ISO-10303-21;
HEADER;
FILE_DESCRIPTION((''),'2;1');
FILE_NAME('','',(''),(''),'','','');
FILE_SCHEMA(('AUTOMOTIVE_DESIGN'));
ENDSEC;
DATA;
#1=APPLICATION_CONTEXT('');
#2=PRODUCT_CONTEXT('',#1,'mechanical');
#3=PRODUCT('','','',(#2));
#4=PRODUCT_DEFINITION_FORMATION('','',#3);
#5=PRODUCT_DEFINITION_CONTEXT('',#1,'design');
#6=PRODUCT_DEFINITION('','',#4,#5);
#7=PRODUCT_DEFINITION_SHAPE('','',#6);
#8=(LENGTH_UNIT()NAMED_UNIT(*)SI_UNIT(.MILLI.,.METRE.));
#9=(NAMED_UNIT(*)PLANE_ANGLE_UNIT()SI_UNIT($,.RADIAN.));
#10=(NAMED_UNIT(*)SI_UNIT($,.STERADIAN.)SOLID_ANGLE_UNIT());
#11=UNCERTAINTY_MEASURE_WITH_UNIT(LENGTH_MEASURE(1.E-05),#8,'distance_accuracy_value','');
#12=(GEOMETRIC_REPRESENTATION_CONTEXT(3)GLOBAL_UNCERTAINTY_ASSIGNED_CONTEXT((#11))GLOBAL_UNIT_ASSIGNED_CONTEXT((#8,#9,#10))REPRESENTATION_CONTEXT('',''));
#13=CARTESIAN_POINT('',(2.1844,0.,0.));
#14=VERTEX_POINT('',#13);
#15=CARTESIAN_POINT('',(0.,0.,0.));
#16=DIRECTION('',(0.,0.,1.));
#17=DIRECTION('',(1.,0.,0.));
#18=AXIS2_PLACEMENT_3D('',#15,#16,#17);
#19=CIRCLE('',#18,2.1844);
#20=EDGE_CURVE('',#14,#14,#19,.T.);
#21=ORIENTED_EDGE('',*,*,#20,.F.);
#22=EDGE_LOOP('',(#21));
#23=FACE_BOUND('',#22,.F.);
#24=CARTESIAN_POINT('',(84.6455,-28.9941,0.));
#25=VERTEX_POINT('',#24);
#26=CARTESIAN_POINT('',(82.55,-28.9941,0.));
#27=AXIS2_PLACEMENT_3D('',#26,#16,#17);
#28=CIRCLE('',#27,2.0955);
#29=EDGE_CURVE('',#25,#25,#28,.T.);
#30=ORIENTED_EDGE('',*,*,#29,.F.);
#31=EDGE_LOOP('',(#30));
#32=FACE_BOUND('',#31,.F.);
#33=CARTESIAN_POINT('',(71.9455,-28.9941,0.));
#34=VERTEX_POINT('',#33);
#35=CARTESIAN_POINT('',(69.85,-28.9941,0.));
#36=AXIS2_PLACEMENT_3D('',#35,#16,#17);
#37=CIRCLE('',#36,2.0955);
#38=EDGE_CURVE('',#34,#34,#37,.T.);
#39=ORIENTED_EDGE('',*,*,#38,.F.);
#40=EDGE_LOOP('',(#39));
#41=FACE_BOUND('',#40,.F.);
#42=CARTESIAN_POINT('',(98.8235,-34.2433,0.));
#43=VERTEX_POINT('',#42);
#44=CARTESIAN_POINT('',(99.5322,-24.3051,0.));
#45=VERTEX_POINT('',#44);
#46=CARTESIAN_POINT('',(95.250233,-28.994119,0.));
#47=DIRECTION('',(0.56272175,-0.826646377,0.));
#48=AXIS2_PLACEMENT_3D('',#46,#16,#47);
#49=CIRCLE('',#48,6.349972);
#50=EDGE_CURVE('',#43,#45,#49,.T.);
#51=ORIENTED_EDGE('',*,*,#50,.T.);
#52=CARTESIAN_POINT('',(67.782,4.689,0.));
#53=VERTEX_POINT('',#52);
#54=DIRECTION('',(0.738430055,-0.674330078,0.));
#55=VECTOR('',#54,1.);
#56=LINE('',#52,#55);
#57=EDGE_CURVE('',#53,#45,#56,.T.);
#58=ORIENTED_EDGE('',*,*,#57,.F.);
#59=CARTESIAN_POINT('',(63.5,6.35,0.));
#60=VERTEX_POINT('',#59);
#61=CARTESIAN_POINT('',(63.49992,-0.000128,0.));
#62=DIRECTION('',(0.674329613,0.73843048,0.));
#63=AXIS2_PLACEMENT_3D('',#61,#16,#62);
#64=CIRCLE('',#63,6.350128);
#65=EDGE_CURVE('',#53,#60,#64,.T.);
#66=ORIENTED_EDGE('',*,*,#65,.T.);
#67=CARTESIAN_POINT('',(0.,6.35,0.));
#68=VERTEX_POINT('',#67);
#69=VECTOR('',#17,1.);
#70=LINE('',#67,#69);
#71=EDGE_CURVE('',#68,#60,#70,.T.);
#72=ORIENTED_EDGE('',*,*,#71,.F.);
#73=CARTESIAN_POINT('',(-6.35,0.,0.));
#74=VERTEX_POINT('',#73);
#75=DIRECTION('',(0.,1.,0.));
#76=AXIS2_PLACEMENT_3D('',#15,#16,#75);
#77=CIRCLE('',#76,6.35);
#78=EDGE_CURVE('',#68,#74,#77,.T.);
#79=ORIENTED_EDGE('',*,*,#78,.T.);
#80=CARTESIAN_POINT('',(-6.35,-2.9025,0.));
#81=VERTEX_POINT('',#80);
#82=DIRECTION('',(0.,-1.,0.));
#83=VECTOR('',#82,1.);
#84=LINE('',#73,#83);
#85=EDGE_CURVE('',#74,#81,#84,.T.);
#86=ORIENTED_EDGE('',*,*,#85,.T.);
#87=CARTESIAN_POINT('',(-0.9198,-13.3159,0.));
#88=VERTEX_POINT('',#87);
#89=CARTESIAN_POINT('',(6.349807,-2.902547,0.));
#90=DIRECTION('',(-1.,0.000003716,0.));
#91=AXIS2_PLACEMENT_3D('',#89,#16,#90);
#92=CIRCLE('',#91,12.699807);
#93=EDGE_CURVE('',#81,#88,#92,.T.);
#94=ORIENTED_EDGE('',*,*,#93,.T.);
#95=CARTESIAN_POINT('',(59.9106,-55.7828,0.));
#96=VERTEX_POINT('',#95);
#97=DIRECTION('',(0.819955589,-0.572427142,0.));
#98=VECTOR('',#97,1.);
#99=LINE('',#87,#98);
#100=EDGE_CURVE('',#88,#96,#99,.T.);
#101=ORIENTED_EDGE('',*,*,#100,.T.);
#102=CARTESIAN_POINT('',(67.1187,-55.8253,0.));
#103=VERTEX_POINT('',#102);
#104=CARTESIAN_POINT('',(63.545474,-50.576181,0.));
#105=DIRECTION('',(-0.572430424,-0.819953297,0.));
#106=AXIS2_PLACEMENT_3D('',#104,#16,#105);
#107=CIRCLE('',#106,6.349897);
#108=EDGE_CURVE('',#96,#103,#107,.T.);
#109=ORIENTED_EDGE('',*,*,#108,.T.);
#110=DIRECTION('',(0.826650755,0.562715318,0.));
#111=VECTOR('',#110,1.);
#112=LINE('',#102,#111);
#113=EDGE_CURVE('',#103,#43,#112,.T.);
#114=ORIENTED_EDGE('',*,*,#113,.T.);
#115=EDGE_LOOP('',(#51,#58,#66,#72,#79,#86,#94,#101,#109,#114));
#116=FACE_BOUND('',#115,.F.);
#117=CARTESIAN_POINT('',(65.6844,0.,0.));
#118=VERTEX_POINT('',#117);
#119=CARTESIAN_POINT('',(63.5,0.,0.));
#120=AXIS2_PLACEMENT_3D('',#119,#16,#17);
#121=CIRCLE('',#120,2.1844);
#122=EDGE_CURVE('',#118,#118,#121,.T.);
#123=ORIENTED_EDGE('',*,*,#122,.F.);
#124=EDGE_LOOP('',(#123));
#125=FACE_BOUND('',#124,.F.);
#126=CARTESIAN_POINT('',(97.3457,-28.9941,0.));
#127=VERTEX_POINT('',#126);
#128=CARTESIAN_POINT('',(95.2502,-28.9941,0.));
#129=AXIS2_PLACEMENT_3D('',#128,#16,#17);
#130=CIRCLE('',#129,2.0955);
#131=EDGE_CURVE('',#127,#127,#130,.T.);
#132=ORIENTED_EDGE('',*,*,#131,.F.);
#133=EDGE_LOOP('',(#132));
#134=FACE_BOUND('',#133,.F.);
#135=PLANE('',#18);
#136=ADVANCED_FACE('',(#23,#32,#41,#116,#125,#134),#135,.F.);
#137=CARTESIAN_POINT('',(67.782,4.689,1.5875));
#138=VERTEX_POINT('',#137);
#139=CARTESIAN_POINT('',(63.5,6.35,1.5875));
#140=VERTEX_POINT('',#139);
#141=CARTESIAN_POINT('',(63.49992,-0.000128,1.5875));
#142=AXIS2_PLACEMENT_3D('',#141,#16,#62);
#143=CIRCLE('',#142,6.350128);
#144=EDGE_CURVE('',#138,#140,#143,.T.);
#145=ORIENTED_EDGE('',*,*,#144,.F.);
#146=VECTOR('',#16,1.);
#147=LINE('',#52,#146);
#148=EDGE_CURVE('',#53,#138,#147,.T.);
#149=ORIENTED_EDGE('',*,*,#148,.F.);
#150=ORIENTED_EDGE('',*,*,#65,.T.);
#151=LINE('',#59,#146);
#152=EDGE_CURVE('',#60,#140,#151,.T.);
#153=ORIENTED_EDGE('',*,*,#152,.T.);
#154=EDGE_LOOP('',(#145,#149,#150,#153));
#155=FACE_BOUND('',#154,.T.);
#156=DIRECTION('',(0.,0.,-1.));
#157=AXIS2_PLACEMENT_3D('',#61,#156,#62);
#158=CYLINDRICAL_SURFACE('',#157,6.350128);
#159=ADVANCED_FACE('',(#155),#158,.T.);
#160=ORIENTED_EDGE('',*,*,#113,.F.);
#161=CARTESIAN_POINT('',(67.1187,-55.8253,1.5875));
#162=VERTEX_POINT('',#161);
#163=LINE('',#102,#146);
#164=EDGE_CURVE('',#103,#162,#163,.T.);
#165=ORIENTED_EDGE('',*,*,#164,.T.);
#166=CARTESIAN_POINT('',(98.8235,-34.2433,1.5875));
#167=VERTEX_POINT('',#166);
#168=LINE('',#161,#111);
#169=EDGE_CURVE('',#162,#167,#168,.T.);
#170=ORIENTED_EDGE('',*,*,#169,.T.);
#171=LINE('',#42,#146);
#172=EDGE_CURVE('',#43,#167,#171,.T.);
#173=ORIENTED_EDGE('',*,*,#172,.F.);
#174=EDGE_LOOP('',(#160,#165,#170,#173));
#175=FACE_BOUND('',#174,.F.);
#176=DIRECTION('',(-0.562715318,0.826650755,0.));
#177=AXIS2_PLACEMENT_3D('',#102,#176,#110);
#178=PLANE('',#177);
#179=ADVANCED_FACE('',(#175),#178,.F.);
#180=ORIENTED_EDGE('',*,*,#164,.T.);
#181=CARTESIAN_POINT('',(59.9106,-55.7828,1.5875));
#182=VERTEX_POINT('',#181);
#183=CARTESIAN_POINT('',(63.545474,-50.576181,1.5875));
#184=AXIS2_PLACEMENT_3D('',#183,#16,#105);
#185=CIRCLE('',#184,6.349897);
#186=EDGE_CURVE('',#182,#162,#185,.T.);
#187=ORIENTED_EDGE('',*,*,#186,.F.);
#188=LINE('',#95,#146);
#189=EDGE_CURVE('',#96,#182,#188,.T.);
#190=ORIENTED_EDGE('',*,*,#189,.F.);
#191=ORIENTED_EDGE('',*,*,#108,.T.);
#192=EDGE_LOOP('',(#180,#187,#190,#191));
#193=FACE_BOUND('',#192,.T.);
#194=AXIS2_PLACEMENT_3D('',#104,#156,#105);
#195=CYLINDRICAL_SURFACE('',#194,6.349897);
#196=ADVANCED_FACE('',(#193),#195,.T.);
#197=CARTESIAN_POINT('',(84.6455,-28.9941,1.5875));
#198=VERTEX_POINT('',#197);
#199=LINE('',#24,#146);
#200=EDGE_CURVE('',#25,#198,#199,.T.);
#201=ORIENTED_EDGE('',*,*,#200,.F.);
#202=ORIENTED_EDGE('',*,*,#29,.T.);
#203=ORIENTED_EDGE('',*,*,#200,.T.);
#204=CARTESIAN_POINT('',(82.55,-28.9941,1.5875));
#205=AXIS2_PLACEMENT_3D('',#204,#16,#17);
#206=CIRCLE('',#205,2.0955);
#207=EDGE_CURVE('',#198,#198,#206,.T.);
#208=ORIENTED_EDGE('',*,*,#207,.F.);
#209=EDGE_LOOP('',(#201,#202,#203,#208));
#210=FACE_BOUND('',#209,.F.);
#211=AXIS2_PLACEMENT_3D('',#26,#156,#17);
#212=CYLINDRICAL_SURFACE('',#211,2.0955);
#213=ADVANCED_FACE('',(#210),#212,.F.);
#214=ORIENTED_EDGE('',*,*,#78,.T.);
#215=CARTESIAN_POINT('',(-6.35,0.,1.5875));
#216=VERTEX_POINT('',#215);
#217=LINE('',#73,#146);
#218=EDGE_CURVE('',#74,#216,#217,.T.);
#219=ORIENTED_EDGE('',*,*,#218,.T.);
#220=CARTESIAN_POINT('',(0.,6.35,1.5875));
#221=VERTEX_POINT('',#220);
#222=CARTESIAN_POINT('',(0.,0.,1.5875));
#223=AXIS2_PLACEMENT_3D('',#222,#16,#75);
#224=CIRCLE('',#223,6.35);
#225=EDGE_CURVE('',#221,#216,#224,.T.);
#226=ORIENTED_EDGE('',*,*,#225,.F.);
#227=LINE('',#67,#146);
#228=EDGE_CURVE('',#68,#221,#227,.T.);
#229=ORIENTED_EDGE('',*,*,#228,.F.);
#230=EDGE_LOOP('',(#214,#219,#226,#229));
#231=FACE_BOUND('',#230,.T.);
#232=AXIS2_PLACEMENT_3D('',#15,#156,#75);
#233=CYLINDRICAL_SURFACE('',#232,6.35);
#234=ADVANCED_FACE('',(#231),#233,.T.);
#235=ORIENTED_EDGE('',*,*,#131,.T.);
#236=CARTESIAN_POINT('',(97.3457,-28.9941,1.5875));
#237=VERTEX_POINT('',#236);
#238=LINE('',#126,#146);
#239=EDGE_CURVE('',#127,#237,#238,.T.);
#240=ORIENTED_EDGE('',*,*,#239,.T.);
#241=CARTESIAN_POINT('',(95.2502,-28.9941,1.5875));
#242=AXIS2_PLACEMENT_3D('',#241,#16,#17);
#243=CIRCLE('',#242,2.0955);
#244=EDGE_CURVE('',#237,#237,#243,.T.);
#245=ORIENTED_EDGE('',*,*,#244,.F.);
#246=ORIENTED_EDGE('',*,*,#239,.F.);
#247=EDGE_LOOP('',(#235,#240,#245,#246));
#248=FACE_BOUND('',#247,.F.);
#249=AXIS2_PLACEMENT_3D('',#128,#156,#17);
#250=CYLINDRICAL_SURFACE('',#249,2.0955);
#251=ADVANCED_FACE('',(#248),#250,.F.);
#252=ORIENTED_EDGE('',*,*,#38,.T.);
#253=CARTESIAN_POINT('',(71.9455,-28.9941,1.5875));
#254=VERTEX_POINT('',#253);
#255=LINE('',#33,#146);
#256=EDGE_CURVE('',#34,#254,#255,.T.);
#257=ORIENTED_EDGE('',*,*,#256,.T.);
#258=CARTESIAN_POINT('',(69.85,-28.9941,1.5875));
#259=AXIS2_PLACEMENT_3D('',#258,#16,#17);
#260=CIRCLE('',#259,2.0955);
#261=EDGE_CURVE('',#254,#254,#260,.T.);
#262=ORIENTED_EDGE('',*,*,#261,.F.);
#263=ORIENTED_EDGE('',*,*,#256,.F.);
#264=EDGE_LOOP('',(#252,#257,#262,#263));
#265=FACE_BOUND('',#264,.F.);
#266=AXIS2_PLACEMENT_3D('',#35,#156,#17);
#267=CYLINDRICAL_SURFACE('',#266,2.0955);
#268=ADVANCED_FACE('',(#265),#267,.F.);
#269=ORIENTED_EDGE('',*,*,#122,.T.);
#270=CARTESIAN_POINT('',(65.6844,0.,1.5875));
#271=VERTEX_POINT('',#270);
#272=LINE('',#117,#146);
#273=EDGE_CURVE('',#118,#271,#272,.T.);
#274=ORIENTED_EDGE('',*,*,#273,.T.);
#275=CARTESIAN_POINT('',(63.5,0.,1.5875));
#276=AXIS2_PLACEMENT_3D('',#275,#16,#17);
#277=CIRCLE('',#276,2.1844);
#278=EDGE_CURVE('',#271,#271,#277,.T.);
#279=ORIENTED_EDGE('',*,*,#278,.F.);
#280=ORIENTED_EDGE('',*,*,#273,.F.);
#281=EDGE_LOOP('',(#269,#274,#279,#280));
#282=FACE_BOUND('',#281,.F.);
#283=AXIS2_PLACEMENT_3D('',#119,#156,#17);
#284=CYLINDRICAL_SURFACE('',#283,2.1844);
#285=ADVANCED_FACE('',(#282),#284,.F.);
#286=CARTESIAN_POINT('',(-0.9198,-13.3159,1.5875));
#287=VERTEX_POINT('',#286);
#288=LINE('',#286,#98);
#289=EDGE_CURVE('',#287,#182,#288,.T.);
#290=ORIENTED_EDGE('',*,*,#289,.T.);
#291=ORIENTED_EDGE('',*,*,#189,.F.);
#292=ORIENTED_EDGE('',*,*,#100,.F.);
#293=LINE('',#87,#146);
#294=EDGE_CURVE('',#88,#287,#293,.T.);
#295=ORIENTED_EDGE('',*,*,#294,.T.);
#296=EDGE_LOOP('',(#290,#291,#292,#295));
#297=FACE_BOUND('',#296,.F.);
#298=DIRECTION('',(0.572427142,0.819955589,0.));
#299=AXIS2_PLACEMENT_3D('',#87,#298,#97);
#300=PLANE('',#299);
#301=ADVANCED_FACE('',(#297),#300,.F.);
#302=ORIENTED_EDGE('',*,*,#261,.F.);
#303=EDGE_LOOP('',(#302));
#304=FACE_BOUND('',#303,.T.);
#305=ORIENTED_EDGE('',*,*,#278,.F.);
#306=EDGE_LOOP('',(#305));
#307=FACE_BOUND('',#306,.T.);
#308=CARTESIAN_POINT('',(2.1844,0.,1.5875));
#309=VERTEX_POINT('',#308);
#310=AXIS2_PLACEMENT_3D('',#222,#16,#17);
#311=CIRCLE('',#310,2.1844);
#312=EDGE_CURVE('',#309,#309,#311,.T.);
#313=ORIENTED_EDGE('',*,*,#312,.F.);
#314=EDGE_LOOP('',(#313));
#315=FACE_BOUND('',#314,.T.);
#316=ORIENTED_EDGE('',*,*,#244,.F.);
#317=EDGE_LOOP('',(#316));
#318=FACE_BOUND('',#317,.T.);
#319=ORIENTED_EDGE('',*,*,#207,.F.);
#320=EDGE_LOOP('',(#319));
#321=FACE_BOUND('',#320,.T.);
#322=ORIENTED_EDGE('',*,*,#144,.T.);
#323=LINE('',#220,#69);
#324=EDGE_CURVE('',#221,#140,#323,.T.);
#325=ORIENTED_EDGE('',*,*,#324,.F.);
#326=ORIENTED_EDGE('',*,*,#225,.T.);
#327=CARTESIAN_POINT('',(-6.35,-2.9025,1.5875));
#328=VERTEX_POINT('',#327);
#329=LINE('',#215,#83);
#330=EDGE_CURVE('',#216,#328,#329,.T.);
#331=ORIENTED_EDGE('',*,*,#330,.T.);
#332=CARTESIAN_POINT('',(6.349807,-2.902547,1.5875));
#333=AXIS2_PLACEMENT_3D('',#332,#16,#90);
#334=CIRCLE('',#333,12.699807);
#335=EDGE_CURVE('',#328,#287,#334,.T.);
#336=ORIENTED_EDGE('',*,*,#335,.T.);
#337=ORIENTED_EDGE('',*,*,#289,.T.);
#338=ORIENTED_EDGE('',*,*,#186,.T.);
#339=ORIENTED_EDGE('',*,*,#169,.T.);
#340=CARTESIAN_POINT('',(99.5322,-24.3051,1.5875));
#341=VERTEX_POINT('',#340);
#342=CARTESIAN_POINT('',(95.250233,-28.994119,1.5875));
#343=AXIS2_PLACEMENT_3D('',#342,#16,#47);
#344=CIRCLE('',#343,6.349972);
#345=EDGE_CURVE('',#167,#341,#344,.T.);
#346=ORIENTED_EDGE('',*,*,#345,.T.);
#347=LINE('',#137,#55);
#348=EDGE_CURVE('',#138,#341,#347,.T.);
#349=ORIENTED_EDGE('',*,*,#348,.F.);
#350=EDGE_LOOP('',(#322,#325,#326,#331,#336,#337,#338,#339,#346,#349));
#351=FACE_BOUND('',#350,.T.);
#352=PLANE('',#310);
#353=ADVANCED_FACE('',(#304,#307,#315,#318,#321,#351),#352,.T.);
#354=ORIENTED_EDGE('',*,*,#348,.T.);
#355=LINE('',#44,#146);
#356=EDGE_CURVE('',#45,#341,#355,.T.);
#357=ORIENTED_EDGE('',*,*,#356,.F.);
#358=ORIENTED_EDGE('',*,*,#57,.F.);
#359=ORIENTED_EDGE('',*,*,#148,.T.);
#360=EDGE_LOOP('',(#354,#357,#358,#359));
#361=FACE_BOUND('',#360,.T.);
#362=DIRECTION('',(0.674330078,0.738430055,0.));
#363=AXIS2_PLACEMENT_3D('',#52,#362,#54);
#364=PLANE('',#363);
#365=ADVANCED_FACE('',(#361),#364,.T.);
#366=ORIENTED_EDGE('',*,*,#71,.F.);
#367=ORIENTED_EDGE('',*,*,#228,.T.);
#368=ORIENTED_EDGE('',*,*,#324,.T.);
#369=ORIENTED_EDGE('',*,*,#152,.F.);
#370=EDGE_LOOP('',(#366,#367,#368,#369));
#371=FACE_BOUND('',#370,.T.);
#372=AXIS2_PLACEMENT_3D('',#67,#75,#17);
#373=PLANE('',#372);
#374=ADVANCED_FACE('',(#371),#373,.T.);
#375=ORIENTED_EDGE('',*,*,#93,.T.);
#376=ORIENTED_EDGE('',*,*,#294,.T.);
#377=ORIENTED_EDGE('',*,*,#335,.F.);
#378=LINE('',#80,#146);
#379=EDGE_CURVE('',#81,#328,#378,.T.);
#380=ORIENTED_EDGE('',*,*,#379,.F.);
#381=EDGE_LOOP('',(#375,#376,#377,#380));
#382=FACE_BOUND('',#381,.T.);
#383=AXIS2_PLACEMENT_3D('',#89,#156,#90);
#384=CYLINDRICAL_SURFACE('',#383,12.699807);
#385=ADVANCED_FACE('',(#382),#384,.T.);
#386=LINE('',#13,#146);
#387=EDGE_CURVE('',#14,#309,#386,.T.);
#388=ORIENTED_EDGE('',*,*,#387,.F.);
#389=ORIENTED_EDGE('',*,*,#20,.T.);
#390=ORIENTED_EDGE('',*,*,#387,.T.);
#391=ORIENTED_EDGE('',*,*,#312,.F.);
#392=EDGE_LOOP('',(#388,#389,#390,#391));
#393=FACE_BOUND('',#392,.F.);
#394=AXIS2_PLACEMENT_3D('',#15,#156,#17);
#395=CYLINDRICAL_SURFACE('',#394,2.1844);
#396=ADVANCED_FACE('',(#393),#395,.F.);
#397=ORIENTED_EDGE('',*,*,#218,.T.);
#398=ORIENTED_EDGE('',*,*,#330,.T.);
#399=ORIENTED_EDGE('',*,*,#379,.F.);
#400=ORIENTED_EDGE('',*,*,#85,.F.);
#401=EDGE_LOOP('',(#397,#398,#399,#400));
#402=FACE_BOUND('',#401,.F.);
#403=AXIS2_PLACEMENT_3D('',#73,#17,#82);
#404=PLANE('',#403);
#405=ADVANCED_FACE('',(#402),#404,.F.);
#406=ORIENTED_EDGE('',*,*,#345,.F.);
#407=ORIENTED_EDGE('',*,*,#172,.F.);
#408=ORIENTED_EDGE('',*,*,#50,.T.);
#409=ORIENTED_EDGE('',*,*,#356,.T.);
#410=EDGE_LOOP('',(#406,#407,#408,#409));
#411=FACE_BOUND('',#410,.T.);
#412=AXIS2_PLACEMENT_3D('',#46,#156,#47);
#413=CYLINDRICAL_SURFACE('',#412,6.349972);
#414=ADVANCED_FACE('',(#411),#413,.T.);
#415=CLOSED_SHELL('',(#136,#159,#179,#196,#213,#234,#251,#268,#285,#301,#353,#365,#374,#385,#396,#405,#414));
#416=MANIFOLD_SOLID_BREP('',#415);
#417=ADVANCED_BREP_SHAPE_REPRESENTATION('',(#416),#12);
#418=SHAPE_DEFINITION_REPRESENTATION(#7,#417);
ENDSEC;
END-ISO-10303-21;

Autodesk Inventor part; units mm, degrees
ref_plane "YZ Plane" through (0, 0, 0) normal (1, 0, 0) x (0, 1, 0)
ref_plane "XZ Plane" through (0, 0, 0) normal (0, 1, 0) x (-1, 0, 0)
ref_plane "XY Plane" through (0, 0, 0) normal (0, 0, 1) x (1, 0, 0)
sketch "main" plane through (0, 0, 0) normal (0, 0, 1) x (1, 0, 0)
  circle A0 centre (-16.6212, -19.5437) radius 2.1844
  arc A1 (-20.9032, -24.2328) -> (-16.6212, -25.8937) centre (-16.6212, -19.5437) ccw
  circle A2 centre (-22.9712, 9.4504) radius 2.0955
  arc A3 (-13.0318, 36.2391) -> (-20.24, 36.2816) centre (-16.6667, 31.0324) ccw
  line L0 (-20.9032, -24.2328) -> (-52.6534, 4.7613)
  circle A4 centre (-35.6713, 9.4504) radius 2.0955
  circle A5 centre (-48.3714, 9.4504) radius 2.0955
  arc A6 (-51.9447, 14.6996) -> (-52.6534, 4.7613) centre (-48.3714, 9.4504) ccw
  line L1 (-20.24, 36.2816) -> (-51.9447, 14.6996)
  circle A7 centre (46.8788, -19.5437) radius 2.1844
  arc A8 (46.8788, -25.8937) -> (53.2288, -19.5437) centre (46.8788, -19.5437) ccw
  line L2 (47.7986, -6.2278) -> (-13.0318, 36.2391)
  line L3 (46.8788, -25.8937) -> (-16.6212, -25.8937)
  arc A9 (53.2288, -16.6412) -> (47.7986, -6.2278) centre (40.5288, -16.6412) ccw
  line L4 (53.2288, -19.5437) -> (53.2288, -16.6412)
  point P0 (0.102, -2.5446)
  point P1 (53.2288, -10.0187)
  dimension "d0" = 12.7
  dimension "d1" = 9.525
  dimension "d2" = 12.7
  dimension "d3" = 12.7
  dimension "d4" = 6.35
  dimension "d5" = 4.191
  dimension "d6" = 4.191
  dimension "d7" = 4.191
sketch "Sketch1" plane through (0, 0, 0) normal (0, 0, 1) x (1, 0, 0)
  circle A0 centre (63.5, 0) radius 2.1844
  arc A1 (67.782, 4.689) -> (63.5, 6.35) centre (63.5, 0) ccw
  circle A2 centre (69.85, -28.9941) radius 2.0955
  arc A3 (59.9106, -55.7828) -> (67.1187, -55.8253) centre (63.5455, -50.5761) ccw
  line L0 (67.782, 4.689) -> (99.5322, -24.3051)
  circle A4 centre (82.55, -28.9941) radius 2.0955
  circle A5 centre (95.2502, -28.9941) radius 2.0955
  arc A6 (98.8235, -34.2433) -> (99.5322, -24.3051) centre (95.2502, -28.9941) ccw
  line L1 (67.1187, -55.8253) -> (98.8235, -34.2433)
  circle A7 centre (0, 0) radius 2.1844
  arc A8 (0, 6.35) -> (-6.35, 0) centre (0, 0) ccw
  line L2 (-0.9198, -13.3159) -> (59.9106, -55.7828)
  line L3 (0, 6.35) -> (63.5, 6.35)
  arc A9 (-6.35, -2.9025) -> (-0.9198, -13.3159) centre (6.35, -2.9025) ccw
  line L4 (-6.35, 0) -> (-6.35, -2.9025)
  point P0 (0, 0)
extrude "Extrusion1" add sketch "Sketch1" along normal blind 1.5875
properties part number "sled" material "Acetal Resin, White"
